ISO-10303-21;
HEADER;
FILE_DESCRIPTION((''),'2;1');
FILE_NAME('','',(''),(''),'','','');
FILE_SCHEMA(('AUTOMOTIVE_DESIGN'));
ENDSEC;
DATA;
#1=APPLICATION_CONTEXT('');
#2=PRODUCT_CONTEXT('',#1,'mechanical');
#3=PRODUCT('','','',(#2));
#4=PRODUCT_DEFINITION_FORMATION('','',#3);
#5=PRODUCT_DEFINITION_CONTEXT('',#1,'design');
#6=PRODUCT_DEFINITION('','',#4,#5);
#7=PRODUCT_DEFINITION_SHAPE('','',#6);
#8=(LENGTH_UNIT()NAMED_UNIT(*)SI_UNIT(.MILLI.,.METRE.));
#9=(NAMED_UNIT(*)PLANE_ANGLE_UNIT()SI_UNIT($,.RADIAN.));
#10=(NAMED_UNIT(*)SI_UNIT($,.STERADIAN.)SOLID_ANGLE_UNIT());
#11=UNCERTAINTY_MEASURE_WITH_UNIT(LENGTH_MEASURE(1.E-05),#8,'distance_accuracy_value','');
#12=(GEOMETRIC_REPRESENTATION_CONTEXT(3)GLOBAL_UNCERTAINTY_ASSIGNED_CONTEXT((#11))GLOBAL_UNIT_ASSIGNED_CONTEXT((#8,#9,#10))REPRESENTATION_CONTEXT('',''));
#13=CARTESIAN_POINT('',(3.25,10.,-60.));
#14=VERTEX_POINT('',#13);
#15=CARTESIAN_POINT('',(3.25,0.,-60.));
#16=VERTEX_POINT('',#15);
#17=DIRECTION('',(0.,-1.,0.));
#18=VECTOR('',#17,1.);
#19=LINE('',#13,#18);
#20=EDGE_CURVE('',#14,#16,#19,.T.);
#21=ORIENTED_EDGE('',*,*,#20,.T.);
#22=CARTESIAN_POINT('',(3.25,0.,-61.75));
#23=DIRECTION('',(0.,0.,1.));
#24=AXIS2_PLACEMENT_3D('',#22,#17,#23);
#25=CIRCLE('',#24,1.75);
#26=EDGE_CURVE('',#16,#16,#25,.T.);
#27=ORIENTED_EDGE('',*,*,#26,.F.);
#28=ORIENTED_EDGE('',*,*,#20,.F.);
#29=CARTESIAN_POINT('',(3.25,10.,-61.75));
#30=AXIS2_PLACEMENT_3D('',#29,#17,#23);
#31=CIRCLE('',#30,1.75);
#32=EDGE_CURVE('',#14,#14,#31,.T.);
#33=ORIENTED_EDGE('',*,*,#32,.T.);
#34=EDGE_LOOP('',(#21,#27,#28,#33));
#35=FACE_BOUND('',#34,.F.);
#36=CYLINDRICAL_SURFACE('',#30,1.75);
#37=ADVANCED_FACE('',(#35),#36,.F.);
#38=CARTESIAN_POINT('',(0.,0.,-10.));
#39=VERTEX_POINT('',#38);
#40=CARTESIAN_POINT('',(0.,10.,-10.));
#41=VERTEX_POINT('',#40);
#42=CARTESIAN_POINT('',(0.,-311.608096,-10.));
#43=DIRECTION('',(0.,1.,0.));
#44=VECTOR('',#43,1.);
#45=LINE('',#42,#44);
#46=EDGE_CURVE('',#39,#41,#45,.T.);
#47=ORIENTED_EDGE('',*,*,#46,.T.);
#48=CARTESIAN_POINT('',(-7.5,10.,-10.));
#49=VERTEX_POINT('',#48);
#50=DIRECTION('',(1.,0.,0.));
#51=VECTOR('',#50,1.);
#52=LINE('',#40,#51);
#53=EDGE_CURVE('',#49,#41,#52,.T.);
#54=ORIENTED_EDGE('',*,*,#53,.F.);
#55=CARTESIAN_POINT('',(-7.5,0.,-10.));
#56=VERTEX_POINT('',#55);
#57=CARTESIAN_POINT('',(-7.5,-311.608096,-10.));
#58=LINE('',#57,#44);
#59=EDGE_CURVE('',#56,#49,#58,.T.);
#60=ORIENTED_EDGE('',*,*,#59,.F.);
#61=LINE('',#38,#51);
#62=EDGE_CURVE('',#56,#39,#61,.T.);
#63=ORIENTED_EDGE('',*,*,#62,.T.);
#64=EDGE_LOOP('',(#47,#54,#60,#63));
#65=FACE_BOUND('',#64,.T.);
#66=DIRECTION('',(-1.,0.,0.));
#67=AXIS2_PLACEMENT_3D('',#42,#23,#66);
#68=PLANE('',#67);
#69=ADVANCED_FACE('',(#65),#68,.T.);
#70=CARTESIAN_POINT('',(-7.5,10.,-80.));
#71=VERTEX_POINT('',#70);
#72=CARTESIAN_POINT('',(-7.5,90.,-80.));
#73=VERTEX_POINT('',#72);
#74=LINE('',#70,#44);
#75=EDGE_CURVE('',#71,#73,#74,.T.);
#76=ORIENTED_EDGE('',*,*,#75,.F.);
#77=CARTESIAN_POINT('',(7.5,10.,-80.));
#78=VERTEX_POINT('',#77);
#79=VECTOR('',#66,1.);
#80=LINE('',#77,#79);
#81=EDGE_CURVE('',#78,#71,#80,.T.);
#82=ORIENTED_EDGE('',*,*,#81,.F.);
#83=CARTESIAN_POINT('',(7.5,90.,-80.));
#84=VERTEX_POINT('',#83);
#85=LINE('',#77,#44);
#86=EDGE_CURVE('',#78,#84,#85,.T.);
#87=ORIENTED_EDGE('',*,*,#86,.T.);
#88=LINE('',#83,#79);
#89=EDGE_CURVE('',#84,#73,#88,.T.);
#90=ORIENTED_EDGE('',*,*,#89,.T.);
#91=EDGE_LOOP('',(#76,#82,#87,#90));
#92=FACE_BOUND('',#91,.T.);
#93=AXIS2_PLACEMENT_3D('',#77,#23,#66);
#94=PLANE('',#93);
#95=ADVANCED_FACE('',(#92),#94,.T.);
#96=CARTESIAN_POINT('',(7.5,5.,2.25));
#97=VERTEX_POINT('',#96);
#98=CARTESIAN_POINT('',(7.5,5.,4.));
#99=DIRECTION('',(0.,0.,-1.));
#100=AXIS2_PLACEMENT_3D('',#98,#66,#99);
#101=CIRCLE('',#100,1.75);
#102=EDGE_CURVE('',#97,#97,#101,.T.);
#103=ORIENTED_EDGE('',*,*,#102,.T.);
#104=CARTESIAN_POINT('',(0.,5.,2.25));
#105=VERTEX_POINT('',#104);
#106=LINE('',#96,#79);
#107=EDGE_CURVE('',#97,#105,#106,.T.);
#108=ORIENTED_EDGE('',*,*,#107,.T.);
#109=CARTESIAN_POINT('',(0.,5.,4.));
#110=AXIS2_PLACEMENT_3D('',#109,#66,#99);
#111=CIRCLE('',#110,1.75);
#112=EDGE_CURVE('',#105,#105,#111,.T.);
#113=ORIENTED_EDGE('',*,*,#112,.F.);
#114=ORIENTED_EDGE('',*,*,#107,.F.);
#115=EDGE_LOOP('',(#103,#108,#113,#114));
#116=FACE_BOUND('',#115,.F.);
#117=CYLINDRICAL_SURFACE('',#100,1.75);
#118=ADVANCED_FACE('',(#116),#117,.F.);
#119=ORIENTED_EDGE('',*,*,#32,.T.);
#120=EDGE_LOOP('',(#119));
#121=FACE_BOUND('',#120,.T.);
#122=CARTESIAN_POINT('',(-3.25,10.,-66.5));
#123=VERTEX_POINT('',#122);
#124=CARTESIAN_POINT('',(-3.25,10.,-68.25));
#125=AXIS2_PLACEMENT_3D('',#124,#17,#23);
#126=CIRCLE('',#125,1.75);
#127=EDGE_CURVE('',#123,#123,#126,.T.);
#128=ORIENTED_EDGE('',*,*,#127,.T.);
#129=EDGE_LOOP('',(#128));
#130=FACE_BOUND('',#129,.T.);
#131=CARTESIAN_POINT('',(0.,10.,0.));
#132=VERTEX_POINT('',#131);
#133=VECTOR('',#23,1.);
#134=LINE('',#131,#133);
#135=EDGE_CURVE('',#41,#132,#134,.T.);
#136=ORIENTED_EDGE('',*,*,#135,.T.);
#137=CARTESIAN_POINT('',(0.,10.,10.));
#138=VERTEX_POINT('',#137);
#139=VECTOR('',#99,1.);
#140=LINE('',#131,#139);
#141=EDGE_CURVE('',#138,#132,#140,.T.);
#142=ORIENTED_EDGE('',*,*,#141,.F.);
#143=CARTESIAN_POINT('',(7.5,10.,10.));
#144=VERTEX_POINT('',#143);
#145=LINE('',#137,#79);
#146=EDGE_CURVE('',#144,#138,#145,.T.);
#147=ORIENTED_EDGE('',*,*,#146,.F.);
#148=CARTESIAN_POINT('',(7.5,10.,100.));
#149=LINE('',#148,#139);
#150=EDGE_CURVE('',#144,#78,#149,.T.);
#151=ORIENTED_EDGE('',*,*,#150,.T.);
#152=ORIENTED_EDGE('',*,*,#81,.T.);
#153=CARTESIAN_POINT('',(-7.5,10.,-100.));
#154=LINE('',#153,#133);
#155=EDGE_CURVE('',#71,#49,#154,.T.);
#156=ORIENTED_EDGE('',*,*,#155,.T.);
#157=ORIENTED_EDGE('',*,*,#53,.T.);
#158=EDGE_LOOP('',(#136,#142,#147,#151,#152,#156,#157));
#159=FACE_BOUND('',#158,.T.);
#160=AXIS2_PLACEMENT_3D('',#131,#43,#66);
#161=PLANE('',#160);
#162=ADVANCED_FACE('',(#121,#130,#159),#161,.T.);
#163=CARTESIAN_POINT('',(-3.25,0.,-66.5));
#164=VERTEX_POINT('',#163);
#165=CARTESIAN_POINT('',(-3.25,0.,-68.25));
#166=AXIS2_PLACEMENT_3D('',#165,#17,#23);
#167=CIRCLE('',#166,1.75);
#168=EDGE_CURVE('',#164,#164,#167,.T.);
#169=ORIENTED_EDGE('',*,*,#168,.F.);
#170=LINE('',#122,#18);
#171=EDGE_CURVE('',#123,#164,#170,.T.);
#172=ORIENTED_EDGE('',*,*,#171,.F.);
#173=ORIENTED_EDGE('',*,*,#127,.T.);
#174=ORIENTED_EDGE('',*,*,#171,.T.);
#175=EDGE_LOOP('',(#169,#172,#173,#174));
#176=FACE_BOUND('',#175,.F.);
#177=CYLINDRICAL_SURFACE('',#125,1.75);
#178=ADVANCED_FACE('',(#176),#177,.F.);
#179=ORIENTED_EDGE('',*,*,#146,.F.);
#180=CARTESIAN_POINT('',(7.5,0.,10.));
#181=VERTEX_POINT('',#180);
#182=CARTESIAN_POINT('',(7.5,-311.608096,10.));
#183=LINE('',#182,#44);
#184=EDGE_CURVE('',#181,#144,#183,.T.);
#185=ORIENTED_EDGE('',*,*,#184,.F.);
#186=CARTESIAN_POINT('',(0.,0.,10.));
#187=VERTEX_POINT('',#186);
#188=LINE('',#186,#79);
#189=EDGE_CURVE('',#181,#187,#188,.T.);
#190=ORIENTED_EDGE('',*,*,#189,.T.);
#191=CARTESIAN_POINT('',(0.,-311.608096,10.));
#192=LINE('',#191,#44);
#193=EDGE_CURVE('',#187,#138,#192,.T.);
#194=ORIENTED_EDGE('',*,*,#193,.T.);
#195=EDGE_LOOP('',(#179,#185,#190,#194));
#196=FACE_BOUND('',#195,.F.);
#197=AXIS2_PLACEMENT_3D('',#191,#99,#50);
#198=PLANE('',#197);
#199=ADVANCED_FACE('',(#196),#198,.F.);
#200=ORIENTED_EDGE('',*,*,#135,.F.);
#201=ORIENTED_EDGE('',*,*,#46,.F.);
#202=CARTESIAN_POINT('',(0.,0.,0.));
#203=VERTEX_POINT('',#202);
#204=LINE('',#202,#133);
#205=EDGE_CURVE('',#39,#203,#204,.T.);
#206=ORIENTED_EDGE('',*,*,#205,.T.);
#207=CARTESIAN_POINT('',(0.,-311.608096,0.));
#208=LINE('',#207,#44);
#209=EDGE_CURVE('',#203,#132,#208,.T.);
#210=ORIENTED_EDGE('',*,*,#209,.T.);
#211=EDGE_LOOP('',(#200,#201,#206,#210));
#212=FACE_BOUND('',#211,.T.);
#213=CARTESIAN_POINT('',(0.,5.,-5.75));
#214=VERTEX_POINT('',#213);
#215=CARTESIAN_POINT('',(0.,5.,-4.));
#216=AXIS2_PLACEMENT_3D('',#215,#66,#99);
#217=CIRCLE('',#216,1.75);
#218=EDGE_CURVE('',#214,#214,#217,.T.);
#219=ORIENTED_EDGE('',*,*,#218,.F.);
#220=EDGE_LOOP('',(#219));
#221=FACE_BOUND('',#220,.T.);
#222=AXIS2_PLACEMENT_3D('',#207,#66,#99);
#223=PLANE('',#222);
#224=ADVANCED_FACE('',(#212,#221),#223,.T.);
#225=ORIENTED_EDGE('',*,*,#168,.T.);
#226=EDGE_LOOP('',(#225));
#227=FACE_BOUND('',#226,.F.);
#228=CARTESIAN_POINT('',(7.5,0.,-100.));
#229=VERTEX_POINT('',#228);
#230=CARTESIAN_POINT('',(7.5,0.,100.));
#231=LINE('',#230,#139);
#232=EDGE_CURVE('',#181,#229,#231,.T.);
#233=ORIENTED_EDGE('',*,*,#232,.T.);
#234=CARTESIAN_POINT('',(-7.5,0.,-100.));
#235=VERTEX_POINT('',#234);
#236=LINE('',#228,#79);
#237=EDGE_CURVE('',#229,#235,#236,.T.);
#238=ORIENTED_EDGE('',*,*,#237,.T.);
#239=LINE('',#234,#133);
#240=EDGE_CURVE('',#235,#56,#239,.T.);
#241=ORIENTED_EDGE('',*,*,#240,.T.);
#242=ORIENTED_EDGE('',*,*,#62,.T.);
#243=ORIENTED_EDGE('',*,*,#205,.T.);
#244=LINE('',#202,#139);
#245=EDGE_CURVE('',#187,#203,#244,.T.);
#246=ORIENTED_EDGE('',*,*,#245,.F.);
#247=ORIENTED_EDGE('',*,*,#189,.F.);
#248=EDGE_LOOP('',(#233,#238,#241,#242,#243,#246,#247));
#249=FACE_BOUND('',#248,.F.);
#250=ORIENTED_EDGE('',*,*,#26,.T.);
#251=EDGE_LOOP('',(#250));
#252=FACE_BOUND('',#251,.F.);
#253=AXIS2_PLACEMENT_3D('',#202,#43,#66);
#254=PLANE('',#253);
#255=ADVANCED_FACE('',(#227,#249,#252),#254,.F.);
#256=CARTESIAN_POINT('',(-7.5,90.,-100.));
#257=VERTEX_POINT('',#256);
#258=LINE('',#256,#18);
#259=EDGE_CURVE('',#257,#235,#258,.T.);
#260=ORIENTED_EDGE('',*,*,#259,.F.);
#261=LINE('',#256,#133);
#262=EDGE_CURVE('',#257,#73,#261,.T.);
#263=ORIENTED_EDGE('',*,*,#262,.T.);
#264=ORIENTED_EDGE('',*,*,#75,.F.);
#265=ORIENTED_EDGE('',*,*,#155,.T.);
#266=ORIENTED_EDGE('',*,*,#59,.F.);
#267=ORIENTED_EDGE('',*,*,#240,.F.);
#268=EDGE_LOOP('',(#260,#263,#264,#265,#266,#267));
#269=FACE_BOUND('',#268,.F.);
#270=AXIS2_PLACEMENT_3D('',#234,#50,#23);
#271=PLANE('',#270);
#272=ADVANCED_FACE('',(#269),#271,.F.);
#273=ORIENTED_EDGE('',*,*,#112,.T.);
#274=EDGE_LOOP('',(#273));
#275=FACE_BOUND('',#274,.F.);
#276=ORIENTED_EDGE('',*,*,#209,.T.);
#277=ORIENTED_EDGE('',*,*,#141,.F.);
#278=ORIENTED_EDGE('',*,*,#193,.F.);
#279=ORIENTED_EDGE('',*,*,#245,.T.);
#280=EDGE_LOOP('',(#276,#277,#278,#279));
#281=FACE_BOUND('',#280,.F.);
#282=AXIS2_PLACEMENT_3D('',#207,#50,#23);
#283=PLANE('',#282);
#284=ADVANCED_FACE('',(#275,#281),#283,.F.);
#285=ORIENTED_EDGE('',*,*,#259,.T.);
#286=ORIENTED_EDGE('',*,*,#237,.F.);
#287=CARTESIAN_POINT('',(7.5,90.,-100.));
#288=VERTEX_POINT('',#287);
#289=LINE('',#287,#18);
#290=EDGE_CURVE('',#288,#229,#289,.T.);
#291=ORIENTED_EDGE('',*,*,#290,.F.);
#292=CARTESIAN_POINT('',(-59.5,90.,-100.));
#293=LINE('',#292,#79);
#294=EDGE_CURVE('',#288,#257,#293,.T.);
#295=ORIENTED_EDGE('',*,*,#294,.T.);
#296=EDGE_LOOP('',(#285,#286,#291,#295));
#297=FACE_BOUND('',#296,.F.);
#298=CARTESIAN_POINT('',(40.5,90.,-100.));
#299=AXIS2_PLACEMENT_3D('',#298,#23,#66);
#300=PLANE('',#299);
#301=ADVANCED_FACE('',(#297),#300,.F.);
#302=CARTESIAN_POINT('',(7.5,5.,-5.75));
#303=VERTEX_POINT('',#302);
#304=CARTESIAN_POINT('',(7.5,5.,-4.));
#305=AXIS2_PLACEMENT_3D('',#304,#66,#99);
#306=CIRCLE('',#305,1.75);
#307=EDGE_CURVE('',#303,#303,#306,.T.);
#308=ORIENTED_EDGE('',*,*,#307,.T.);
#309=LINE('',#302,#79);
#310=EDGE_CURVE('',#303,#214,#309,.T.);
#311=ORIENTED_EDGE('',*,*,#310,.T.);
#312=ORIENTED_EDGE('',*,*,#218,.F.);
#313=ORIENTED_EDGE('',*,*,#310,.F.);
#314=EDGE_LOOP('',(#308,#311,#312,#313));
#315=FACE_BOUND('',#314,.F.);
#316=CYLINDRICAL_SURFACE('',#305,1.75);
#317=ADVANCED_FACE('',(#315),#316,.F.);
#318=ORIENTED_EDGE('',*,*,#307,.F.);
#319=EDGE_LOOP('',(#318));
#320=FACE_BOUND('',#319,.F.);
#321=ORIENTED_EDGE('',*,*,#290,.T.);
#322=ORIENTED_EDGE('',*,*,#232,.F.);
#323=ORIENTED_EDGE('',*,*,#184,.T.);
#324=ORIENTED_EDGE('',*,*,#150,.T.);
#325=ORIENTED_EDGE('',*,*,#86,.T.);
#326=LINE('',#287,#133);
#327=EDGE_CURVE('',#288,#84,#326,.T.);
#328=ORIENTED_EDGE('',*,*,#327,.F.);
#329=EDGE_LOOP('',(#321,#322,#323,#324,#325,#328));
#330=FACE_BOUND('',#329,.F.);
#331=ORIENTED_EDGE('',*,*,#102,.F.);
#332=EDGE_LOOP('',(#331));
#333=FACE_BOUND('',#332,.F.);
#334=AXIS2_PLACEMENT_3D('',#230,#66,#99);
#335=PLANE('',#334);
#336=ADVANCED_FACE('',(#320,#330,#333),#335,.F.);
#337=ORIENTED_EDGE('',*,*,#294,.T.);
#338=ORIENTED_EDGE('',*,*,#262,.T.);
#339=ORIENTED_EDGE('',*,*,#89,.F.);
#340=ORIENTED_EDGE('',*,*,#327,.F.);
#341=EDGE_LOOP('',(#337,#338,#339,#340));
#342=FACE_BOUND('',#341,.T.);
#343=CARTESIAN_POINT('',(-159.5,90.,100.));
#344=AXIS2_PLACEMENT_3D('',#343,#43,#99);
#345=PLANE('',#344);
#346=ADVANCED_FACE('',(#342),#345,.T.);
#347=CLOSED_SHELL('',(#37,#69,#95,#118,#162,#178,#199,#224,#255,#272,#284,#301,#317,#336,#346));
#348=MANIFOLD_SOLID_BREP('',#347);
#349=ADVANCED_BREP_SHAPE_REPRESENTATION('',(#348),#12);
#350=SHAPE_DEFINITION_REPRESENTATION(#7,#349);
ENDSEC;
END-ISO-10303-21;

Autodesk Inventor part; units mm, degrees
ref_plane "YZ Plane" through (0, 0, 0) normal (1, 0, 0) x (0, 1, 0)
ref_plane "XZ Plane" through (0, 0, 0) normal (0, 1, 0) x (-1, 0, 0)
ref_plane "XY Plane" through (0, 0, 0) normal (0, 0, 1) x (1, 0, 0)
sketch "Boceto2" plane through (0, 0, 0) normal (0, 1, 0) x (-1, 0, 0)
  line L0 (7.5, 100) -> (-7.5, 100)
  line L1 (-7.5, 100) -> (-7.5, -100)
  line L2 (-7.5, -100) -> (7.5, -100)
  line L3 (7.5, -100) -> (7.5, 100)
  line L4 (7.5, 100) -> (-7.5, -100) construction
  line L5 (-7.5, 100) -> (7.5, -100) construction
  point P0 (0, 0)
  dimension "d7" = 15
  dimension "d8" = 200
extrude "Extrusión1" add sketch "Boceto2" along normal blind 10
sketch "Boceto3" plane through (0, 10, 0) normal (0, 1, 0) x (1, 0, 0)
  line L0 (5, 60) -> (-5, 60)
  line L1 (-5, 60) -> (-5, 70)
  line L2 (-5, 70) -> (5, 70)
  line L3 (5, 70) -> (5, 60)
  line L4 (5, 60) -> (-5, 70) construction
  line L5 (7.5, 100) -> (-7.5, 100) projected
  line L6 (0, 64.5148) -> (0, 61.9205)
  circle A0 centre (3.25, 61.75) radius 1.75
  circle A1 centre (-3.25, 68.25) radius 1.75
  line L7 (-7.5, 100) -> (-7.5, -100) projected
  line L8 (-7.5, 0) -> (0, 0)
  line L9 (5, -70) -> (5, -60)
  line L10 (-5, -70) -> (5, -70)
  line L11 (5, -60) -> (-5, -60)
  line L12 (-5, -60) -> (-5, -70)
  line L13 (5, -60) -> (-5, -70) construction
  line L14 (0, -64.5148) -> (0, -61.9205)
  circle A2 centre (-3.25, -68.25) radius 1.75
  circle A3 centre (3.25, -61.75) radius 1.75
  point P0 (3.25, 68.25)
  point P1 (-5, 65)
  point P2 (-3.25, 61.75)
  point P3 (0, 100)
  point P4 (3.25, -68.25)
  point P5 (-3.25, -61.75)
  point P6 (-5, -65)
  dimension "d12" = 1.75
  dimension "d13" = 1.75
  dimension "d14" = 1.75
  dimension "d15" = 1.75
  dimension "d16" = 10
  dimension "d17" = 10
  dimension "d19" = 30
  dimension "d67" = 31.75
hole "Agujero1" at (3.25, 10, -61.75) at (-3.25, 10, -68.25) at (-3.25, 10, 68.25) at (3.25, 10, 61.75) direction (0, -1, 0) diameter 3.5 end through all
sketch "Boceto4" plane through (0, 10, 0) normal (0, 1, 0) x (1, 0, 0)
  line L0 (-7.5, 100) -> (-7.5, -100) projected
  line L1 (-7.5, -100) -> (7.5, -100)
  line L2 (7.5, -100) -> (7.5, -80)
  line L3 (7.5, -80) -> (-7.5, -80)
  line L4 (-7.5, -80) -> (-7.5, -100)
  line L5 (-7.5, 0) -> (1.0116, 0)
  line L6 (-7.5, -100) -> (-7.5, 100)
  line L7 (-7.5, 100) -> (7.5, 100)
  line L8 (7.5, 100) -> (7.5, 80)
  line L9 (7.5, 80) -> (-7.5, 80)
  line L10 (-7.5, 80) -> (-7.5, 100)
  point P0 (0, 0)
  point P1 (-7.5, -80)
  point P2 (-7.5, 80)
  dimension "d27" = 15
  dimension "d28" = 20
extrude "Extrusión2" add sketch "Boceto4" along normal blind 80
sketch "Boceto5" plane through (0, 90, 0) normal (0, 1, 0) x (1, 0, 0)
  line L0 (-7.5, -100) -> (7.5, -100) projected
  line L1 (-7.5, -100) -> (40.5, -100)
  line L2 (40.5, -100) -> (40.5, 100)
  line L3 (40.5, 100) -> (-7.5, 100)
  line L4 (-7.5, 100) -> (-7.5, -100)
  line L5 (40.5, -100) -> (-159.5, -100)
  line L6 (-159.5, -100) -> (-159.5, 100)
  line L7 (-159.5, 100) -> (40.5, 100)
  line L8 (40.5, 100) -> (40.5, -100)
  point P0 (0, 0)
  point P1 (-7.5, 100)
  dimension "d31" = 48
  dimension "d32" = 200
  dimension "d74" = 200
extrude "Extrusión3" add sketch "Boceto5" along normal blind 110
sketch "Boceto6" plane through (0, 200, 0) normal (0, 1, 0) x (1, 0, 0)
  line L0 (40.5, 100) -> (7.5, 100) projected
  line L1 (40.5, 100) -> (20.5, 100)
  line L2 (20.5, 100) -> (20.5, 80)
  line L3 (7.5, -100) -> (40.5, -100) projected
  line L4 (24, -100) -> (24, -80)
  line L5 (-159.5, 100) -> (-159.5, -100) projected
  line L6 (20.5, 80) -> (-159.5, 80)
  line L7 (-159.5, 80) -> (-159.5, -80)
  line L8 (-159.5, -80) -> (20.5, -80)
  line L9 (20.5, -80) -> (20.5, 80)
  line L10 (-159.5, -100) -> (40.5, -100) projected
  point P0 (7.5, 80)
  point P1 (-159.5, 80)
  dimension "d36" = 20
  dimension "d37" = 20
  dimension "d38" = 20
  dimension "d78" = 20
extrude "Extrusión4" cut sketch "Boceto6" against normal blind 90
sketch "Boceto7" plane through (-159.5, 90, -100) normal (-1, 0, 0) x (0, 0, 1)
  line L0 (0, 110) -> (20, 110) projected
  line L1 (20, 110) -> (10, 110)
  line L2 (10, 110) -> (10, 20)
  line L3 (10, 20) -> (20, 20)
  line L4 (20, 20) -> (20, 110)
  line L5 (180, 110) -> (180, 20) projected
  line L6 (180, 110) -> (190, 110)
  line L7 (190, 110) -> (190, 20)
  line L8 (190, 20) -> (180, 20)
  line L9 (180, 20) -> (180, 110)
  line L10 (200, 0) -> (200, 110) projected
  line L11 (0, 0) -> (0, 110) projected
  line L12 (0, 110) -> (10, 110)
  line L13 (10, 110) -> (10, 20)
  line L14 (10, 20) -> (0, 20)
  line L15 (0, 20) -> (0, 110)
  line L16 (200, 110) -> (0, 110) projected
  line L17 (200, 110) -> (190, 110)
  line L18 (190, 110) -> (190, 20)
  line L19 (190, 20) -> (200, 20)
  line L20 (200, 20) -> (200, 110)
  point P0 (100, -90)
  point P1 (200, 20)
  dimension "d42" = 10
  dimension "d63" = 10
  dimension "d65" = 10
extrude "Extrusión5" cut sketch "Boceto7" against normal blind 30 contours L0 L2 L14 L11 | L16 L10 L19 L7
sketch "Boceto8" plane through (-7.5, 0, 100) normal (0, 0, 1) x (1, 0, 0)
  line L0 (-122, 200) -> (-122, 110) projected
  line L1 (-132, 175) -> (-142, 175)
  line L2 (-142, 175) -> (-142, 185)
  line L3 (-142, 185) -> (-132, 185)
  line L4 (-132, 185) -> (-132, 175)
  line L5 (-132, 175) -> (-142, 185) construction
  line L6 (-142, 175) -> (-132, 185) construction
  line L7 (-152, 200) -> (48, 200) projected
  line L8 (-113, 155) -> (-128, 155)
  line L9 (-152, 110) -> (-122, 110) projected
  line L10 (-132, 180) -> (-131.5898, 180)
  circle A0 centre (-140.25, 183.25) radius 1.75
  circle A1 centre (-133.75, 176.75) radius 1.75
  line L11 (-132, 125) -> (-132, 135)
  line L12 (-142, 125) -> (-132, 125)
  line L13 (-132, 135) -> (-142, 125) construction
  line L14 (-132, 135) -> (-142, 135)
  line L15 (-142, 135) -> (-132, 125) construction
  line L16 (-142, 135) -> (-142, 125)
  line L17 (-132, 130) -> (-131.5898, 130)
  circle A2 centre (-133.75, 133.25) radius 1.75
  circle A3 centre (-140.25, 126.75) radius 1.75
  line L18 (-152, 110) -> (-152, 200) projected
  point P0 (7.5, 0)
  point P1 (-113, 215)
  point P2 (-133.75, 183.25)
  point P3 (-142, 180)
  point P4 (-140.25, 176.75)
  point P5 (48, 200)
  point P6 (-133.75, 126.75)
  point P7 (-140.25, 133.25)
  point P8 (-143, 115)
  point P9 (-133.75, 126.75)
  point P10 (-140.25, 133.25)
  point P11 (-142, 130)
  dimension "d46" = 1.75
  dimension "d47" = 1.75
  dimension "d48" = 1.75
  dimension "d49" = 1.75
  dimension "d50" = 10
  dimension "d51" = 10
  dimension "d52" = 15
  dimension "d66" = 10
  dimension "d70" = 15
hole "Agujero2" at (-147.75, 183.25, 100) at (-141.25, 176.75, 100) at (-147.75, 126.75, 100) at (-141.25, 133.25, 100) direction (0, 0, -1) diameter 3.5 end through all
ref_plane "Plano de trabajo1" through (-159.5, 90, 100) normal (0, -1, 0) x (1, 0, 0)
split "Dividir1" plane through (-159.5, 90, 100) removes the side toward (0, 1, 0)
sketch "Boceto9" plane through (0, 10, 0) normal (0, 1, 0) x (1, 0, 0)
  line L0 (0, 0) -> (0, -10)
  line L1 (0, -10) -> (7.5, -10)
  line L2 (7.5, -80) -> (7.5, 80) projected
  line L3 (0, 0) -> (0, 10)
  line L4 (0, 10) -> (-7.5, 10)
  line L5 (-7.5, 80) -> (-7.5, -80) projected
  dimension "d83" = 10
  dimension "d84" = 10
ref_plane "Plano de trabajo2" through (-7.5, 10, 0) normal (0, 0, 1) x (1, 0, 0)
sketch "Boceto10" plane through (7.5, 0, 100) normal (1, 0, 0) x (0, 0, -1)
  circle A0 centre (96, 5) radius 1.75
  line L0 (100, -18) -> (100, 108) projected
  line L1 (0, 0) -> (200, 0) projected
  circle A1 centre (104, 5) radius 1.75
  point P0 (100, 0)
  dimension "d85" = 3.5
  dimension "d86" = 4
  dimension "d87" = 5
hole "Agujero3" at (7.5, 5, 4) at (7.5, 5, -4) direction (-1, 0, 0) diameter 3.5 end through all
split body "Dividir2" sketch "Boceto9" result one side removed curves L1 L0 L3 L4 removed pieces at (-7, 33.3333, 93.3333)
properties part number "container_back_foot_2"
